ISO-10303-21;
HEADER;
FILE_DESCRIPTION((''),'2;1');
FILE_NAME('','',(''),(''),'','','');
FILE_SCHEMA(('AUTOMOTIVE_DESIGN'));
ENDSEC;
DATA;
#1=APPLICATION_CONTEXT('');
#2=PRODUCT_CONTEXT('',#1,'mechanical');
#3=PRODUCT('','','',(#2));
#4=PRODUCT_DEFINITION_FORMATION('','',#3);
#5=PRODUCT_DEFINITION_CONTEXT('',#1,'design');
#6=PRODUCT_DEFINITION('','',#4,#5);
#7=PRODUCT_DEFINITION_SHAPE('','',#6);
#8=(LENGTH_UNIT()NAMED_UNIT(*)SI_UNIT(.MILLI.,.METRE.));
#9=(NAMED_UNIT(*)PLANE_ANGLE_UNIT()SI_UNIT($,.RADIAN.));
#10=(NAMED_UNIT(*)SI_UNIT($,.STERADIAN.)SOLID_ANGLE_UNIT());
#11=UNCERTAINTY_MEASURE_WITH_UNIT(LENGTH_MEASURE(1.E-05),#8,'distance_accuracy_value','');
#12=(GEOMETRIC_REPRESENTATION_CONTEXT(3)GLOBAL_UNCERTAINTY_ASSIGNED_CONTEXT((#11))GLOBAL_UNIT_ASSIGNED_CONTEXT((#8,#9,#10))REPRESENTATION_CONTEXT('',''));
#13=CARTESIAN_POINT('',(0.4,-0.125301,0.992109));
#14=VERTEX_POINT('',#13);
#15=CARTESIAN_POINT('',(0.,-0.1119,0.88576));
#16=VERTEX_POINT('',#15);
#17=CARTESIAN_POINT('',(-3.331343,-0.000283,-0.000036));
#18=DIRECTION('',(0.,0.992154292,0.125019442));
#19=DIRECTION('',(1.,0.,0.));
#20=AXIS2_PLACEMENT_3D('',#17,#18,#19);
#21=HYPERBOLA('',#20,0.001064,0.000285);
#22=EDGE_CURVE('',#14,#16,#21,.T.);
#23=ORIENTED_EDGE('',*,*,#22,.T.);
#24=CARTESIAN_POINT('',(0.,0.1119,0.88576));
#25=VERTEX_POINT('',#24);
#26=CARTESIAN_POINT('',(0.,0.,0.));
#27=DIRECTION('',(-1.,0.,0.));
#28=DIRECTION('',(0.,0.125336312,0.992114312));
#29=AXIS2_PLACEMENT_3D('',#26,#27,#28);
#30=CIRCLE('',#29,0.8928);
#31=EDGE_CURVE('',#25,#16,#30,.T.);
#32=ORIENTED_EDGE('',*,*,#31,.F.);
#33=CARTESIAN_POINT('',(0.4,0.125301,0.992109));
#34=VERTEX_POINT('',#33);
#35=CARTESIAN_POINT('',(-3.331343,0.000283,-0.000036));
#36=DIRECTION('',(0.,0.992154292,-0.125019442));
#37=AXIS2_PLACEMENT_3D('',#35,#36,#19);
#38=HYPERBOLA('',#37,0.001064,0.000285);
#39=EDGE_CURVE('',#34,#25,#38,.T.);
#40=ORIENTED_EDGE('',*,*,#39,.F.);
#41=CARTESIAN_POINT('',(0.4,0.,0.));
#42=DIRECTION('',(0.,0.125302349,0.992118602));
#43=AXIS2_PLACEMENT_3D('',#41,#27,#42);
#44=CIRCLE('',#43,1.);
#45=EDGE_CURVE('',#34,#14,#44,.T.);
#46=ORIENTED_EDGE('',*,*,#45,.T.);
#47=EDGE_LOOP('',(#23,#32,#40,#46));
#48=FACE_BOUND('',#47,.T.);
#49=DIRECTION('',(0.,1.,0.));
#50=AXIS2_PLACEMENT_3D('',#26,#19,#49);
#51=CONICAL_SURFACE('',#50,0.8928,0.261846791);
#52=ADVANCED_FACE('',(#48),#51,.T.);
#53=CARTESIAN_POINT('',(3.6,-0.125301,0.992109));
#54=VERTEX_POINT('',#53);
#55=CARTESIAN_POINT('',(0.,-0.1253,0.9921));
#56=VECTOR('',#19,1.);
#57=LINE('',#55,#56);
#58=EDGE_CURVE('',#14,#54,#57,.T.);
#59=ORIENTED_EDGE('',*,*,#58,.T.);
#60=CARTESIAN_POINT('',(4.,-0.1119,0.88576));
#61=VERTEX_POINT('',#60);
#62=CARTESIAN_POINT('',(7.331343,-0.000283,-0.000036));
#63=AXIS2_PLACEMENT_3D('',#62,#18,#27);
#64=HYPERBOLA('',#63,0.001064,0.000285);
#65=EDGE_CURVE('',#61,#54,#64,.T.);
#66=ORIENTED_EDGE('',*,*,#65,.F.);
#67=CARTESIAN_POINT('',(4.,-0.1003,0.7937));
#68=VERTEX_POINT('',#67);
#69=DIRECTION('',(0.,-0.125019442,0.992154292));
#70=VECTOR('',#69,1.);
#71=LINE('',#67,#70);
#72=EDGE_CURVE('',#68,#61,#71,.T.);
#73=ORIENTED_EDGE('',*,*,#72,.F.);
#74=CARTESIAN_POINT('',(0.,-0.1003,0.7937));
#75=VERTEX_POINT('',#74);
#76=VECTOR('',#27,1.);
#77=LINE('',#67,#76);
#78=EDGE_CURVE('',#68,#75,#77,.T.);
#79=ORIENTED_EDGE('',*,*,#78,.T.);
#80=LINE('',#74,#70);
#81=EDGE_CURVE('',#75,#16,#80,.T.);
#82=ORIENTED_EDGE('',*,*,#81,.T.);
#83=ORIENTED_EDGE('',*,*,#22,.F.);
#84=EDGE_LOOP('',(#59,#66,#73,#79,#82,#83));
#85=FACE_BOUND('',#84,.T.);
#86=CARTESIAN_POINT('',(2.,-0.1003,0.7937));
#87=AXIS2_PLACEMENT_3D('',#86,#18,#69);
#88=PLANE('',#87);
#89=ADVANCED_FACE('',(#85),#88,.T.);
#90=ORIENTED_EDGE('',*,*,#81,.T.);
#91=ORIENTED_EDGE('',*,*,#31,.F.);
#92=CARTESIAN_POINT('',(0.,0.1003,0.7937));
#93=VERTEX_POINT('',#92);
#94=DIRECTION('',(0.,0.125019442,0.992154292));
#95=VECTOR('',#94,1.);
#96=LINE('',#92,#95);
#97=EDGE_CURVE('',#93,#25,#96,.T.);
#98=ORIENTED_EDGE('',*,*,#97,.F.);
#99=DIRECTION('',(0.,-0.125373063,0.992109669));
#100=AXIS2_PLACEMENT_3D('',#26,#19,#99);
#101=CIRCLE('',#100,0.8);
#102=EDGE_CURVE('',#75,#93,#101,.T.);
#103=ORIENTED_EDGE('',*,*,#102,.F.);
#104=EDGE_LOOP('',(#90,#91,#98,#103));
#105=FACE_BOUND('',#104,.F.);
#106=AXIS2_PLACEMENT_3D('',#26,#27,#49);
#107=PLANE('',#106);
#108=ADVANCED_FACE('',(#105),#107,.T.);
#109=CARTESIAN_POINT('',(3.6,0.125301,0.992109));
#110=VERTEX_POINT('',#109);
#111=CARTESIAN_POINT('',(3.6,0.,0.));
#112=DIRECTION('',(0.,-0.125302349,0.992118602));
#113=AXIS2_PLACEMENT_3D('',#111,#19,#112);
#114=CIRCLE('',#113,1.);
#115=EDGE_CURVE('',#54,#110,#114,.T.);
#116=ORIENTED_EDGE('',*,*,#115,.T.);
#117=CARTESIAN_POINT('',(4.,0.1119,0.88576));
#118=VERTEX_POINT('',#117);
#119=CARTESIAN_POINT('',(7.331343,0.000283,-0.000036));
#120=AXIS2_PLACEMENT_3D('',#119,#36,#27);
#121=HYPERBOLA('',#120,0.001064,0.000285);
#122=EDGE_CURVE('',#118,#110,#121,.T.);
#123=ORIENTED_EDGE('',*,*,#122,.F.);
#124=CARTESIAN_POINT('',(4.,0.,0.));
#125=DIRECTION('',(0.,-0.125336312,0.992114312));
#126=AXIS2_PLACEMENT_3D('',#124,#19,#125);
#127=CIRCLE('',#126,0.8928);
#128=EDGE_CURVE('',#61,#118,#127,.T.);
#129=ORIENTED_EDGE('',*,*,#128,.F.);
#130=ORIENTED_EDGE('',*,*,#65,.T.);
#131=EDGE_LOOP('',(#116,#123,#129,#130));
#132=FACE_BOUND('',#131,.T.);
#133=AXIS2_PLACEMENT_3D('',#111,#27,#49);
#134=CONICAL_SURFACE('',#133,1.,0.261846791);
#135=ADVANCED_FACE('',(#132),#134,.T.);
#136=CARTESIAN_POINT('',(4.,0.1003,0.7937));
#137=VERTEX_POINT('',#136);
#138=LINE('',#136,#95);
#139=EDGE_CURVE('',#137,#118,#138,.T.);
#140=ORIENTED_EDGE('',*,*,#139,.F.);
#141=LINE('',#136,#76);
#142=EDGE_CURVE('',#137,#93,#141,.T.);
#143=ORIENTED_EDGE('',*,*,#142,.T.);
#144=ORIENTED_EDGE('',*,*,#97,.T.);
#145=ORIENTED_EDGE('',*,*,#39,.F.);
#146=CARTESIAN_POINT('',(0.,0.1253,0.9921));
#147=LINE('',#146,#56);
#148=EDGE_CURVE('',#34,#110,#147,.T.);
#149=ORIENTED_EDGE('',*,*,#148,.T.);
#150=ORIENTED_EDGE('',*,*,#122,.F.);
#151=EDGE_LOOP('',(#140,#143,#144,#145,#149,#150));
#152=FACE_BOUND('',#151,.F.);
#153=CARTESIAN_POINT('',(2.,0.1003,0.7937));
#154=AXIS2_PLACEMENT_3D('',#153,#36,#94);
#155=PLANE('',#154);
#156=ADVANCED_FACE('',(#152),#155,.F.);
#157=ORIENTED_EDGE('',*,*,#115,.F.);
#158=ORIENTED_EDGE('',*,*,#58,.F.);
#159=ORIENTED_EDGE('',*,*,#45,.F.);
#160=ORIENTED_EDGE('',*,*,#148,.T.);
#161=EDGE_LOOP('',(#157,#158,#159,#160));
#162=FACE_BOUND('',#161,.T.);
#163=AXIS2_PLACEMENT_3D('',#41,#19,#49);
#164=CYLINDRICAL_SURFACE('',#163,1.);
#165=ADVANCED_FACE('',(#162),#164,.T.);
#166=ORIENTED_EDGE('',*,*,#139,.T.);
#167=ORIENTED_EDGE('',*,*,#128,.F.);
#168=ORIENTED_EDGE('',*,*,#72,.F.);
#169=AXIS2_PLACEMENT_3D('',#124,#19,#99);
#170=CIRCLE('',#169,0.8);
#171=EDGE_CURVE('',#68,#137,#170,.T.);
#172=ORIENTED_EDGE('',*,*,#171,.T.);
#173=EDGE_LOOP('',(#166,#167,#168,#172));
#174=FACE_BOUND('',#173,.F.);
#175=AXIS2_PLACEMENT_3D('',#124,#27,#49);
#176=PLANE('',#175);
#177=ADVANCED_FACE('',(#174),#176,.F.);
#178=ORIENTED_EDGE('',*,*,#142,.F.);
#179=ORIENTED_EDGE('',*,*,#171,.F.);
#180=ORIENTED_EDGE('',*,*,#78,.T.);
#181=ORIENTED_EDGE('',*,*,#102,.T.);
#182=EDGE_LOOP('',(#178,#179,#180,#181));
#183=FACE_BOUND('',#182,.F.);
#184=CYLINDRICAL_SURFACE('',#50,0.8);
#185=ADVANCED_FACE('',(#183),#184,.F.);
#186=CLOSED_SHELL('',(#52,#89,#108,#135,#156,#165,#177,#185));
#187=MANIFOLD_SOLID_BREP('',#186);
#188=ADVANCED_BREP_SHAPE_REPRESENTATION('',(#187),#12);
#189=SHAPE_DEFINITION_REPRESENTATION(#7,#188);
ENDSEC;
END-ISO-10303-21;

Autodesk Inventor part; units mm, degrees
ref_plane "YZ Plane" through (0, 0, 0) normal (1, 0, 0) x (0, 1, 0)
ref_plane "XZ Plane" through (0, 0, 0) normal (0, 1, 0) x (-1, 0, 0)
sketch "Skizze1" plane through (0, 0, 0) normal (0, 0, 1) x (1, 0, 0)
  line L0 (0, 0.8) -> (0, 0.8928)
  line L1 (0, 0.8928) -> (0.4, 1)
  line L2 (0.4, 1) -> (3.6, 1)
  line L3 (3.6, 1) -> (4, 0.8928)
  line L4 (4, 0.8928) -> (4, 0.8)
  line L5 (4, 0) -> (0, 0)
  line L6 (0, 0.8) -> (4, 0.8)
  line L7 (0, 0.8) -> (0, 0) construction
  line L8 (4, 0.8) -> (4, 0) construction
  line L9 (0, 1.5) -> (0, -0.25) projected
  line L10 (-2, 0) -> (12, 0) projected
  dimension "d0" = 4
  dimension "d1" = 2
  dimension "d2" = 1.6
  dimension "d3" = 15
  dimension "d4" = 15
  dimension "d7" = 0.1072
  dimension "d8" = 0.1072
revolve "Körper" add sketch "Skizze1" angle 360 about axis through (4, 0, 0) along (-1, 0, 0)
ref_plane "Work Plane1" through (2, 0, 0) normal (1, 0, 0) x (0, 1, 0)
sketch "Skizze2" plane through (2, 0, 0) normal (1, 0, 0) x (0, 1, 0)
  arc A0 (0.1253, 0.9921) -> (-0.1253, 0.9921) centre (0, 0) ccw
  arc A1 (0.1003, 0.7937) -> (-0.1003, 0.7937) centre (0, 0) ccw
  line L0 (-0.1003, 0.7937) -> (-0.1253, 0.9921)
  line L1 (0.1003, 0.7937) -> (0.1253, 0.9921)
  line L2 (0, 1.5) -> (0, -0.25) projected
  line L3 (-0.2193, 0) -> (0.2193, 0) projected
  dimension "d11" = 1
  dimension "d12" = 0.8
  dimension "d14" = 0.2
  dimension "d15" = 7.2
extrude "Schnitt" cut sketch "Skizze2" against normal mid plane 4
equation "\"d0\" = NLG"
equation "\"d1\" = NND"
equation "\"d2\" = NND - 2 * SD"
equation "\"d3\" = FAWI"
equation "\"d4\" = FAWI"
equation "\"d11\" = 0.5 * NND"
equation "\"d12\" = -SD + 0.5 * NND"
equation "\"d14\" = SD"
equation "\"d5\" = NLG"
equation "\"NND\" = 2"
equation "\"NLG\" = 4"
equation "\"SD\" = 0.2"
equation "\"PHH\" = 0.4"
equation "\"PHH1\" = PHH"
equation "\"FAWI\" = 15deg"
equation "\"d9\" = 0.5 * NLG"
equation "\"NND1\" = 2.4"
properties part number "ISO 13337 - 2 x 4" material "Edelstahl, austenitisch"
